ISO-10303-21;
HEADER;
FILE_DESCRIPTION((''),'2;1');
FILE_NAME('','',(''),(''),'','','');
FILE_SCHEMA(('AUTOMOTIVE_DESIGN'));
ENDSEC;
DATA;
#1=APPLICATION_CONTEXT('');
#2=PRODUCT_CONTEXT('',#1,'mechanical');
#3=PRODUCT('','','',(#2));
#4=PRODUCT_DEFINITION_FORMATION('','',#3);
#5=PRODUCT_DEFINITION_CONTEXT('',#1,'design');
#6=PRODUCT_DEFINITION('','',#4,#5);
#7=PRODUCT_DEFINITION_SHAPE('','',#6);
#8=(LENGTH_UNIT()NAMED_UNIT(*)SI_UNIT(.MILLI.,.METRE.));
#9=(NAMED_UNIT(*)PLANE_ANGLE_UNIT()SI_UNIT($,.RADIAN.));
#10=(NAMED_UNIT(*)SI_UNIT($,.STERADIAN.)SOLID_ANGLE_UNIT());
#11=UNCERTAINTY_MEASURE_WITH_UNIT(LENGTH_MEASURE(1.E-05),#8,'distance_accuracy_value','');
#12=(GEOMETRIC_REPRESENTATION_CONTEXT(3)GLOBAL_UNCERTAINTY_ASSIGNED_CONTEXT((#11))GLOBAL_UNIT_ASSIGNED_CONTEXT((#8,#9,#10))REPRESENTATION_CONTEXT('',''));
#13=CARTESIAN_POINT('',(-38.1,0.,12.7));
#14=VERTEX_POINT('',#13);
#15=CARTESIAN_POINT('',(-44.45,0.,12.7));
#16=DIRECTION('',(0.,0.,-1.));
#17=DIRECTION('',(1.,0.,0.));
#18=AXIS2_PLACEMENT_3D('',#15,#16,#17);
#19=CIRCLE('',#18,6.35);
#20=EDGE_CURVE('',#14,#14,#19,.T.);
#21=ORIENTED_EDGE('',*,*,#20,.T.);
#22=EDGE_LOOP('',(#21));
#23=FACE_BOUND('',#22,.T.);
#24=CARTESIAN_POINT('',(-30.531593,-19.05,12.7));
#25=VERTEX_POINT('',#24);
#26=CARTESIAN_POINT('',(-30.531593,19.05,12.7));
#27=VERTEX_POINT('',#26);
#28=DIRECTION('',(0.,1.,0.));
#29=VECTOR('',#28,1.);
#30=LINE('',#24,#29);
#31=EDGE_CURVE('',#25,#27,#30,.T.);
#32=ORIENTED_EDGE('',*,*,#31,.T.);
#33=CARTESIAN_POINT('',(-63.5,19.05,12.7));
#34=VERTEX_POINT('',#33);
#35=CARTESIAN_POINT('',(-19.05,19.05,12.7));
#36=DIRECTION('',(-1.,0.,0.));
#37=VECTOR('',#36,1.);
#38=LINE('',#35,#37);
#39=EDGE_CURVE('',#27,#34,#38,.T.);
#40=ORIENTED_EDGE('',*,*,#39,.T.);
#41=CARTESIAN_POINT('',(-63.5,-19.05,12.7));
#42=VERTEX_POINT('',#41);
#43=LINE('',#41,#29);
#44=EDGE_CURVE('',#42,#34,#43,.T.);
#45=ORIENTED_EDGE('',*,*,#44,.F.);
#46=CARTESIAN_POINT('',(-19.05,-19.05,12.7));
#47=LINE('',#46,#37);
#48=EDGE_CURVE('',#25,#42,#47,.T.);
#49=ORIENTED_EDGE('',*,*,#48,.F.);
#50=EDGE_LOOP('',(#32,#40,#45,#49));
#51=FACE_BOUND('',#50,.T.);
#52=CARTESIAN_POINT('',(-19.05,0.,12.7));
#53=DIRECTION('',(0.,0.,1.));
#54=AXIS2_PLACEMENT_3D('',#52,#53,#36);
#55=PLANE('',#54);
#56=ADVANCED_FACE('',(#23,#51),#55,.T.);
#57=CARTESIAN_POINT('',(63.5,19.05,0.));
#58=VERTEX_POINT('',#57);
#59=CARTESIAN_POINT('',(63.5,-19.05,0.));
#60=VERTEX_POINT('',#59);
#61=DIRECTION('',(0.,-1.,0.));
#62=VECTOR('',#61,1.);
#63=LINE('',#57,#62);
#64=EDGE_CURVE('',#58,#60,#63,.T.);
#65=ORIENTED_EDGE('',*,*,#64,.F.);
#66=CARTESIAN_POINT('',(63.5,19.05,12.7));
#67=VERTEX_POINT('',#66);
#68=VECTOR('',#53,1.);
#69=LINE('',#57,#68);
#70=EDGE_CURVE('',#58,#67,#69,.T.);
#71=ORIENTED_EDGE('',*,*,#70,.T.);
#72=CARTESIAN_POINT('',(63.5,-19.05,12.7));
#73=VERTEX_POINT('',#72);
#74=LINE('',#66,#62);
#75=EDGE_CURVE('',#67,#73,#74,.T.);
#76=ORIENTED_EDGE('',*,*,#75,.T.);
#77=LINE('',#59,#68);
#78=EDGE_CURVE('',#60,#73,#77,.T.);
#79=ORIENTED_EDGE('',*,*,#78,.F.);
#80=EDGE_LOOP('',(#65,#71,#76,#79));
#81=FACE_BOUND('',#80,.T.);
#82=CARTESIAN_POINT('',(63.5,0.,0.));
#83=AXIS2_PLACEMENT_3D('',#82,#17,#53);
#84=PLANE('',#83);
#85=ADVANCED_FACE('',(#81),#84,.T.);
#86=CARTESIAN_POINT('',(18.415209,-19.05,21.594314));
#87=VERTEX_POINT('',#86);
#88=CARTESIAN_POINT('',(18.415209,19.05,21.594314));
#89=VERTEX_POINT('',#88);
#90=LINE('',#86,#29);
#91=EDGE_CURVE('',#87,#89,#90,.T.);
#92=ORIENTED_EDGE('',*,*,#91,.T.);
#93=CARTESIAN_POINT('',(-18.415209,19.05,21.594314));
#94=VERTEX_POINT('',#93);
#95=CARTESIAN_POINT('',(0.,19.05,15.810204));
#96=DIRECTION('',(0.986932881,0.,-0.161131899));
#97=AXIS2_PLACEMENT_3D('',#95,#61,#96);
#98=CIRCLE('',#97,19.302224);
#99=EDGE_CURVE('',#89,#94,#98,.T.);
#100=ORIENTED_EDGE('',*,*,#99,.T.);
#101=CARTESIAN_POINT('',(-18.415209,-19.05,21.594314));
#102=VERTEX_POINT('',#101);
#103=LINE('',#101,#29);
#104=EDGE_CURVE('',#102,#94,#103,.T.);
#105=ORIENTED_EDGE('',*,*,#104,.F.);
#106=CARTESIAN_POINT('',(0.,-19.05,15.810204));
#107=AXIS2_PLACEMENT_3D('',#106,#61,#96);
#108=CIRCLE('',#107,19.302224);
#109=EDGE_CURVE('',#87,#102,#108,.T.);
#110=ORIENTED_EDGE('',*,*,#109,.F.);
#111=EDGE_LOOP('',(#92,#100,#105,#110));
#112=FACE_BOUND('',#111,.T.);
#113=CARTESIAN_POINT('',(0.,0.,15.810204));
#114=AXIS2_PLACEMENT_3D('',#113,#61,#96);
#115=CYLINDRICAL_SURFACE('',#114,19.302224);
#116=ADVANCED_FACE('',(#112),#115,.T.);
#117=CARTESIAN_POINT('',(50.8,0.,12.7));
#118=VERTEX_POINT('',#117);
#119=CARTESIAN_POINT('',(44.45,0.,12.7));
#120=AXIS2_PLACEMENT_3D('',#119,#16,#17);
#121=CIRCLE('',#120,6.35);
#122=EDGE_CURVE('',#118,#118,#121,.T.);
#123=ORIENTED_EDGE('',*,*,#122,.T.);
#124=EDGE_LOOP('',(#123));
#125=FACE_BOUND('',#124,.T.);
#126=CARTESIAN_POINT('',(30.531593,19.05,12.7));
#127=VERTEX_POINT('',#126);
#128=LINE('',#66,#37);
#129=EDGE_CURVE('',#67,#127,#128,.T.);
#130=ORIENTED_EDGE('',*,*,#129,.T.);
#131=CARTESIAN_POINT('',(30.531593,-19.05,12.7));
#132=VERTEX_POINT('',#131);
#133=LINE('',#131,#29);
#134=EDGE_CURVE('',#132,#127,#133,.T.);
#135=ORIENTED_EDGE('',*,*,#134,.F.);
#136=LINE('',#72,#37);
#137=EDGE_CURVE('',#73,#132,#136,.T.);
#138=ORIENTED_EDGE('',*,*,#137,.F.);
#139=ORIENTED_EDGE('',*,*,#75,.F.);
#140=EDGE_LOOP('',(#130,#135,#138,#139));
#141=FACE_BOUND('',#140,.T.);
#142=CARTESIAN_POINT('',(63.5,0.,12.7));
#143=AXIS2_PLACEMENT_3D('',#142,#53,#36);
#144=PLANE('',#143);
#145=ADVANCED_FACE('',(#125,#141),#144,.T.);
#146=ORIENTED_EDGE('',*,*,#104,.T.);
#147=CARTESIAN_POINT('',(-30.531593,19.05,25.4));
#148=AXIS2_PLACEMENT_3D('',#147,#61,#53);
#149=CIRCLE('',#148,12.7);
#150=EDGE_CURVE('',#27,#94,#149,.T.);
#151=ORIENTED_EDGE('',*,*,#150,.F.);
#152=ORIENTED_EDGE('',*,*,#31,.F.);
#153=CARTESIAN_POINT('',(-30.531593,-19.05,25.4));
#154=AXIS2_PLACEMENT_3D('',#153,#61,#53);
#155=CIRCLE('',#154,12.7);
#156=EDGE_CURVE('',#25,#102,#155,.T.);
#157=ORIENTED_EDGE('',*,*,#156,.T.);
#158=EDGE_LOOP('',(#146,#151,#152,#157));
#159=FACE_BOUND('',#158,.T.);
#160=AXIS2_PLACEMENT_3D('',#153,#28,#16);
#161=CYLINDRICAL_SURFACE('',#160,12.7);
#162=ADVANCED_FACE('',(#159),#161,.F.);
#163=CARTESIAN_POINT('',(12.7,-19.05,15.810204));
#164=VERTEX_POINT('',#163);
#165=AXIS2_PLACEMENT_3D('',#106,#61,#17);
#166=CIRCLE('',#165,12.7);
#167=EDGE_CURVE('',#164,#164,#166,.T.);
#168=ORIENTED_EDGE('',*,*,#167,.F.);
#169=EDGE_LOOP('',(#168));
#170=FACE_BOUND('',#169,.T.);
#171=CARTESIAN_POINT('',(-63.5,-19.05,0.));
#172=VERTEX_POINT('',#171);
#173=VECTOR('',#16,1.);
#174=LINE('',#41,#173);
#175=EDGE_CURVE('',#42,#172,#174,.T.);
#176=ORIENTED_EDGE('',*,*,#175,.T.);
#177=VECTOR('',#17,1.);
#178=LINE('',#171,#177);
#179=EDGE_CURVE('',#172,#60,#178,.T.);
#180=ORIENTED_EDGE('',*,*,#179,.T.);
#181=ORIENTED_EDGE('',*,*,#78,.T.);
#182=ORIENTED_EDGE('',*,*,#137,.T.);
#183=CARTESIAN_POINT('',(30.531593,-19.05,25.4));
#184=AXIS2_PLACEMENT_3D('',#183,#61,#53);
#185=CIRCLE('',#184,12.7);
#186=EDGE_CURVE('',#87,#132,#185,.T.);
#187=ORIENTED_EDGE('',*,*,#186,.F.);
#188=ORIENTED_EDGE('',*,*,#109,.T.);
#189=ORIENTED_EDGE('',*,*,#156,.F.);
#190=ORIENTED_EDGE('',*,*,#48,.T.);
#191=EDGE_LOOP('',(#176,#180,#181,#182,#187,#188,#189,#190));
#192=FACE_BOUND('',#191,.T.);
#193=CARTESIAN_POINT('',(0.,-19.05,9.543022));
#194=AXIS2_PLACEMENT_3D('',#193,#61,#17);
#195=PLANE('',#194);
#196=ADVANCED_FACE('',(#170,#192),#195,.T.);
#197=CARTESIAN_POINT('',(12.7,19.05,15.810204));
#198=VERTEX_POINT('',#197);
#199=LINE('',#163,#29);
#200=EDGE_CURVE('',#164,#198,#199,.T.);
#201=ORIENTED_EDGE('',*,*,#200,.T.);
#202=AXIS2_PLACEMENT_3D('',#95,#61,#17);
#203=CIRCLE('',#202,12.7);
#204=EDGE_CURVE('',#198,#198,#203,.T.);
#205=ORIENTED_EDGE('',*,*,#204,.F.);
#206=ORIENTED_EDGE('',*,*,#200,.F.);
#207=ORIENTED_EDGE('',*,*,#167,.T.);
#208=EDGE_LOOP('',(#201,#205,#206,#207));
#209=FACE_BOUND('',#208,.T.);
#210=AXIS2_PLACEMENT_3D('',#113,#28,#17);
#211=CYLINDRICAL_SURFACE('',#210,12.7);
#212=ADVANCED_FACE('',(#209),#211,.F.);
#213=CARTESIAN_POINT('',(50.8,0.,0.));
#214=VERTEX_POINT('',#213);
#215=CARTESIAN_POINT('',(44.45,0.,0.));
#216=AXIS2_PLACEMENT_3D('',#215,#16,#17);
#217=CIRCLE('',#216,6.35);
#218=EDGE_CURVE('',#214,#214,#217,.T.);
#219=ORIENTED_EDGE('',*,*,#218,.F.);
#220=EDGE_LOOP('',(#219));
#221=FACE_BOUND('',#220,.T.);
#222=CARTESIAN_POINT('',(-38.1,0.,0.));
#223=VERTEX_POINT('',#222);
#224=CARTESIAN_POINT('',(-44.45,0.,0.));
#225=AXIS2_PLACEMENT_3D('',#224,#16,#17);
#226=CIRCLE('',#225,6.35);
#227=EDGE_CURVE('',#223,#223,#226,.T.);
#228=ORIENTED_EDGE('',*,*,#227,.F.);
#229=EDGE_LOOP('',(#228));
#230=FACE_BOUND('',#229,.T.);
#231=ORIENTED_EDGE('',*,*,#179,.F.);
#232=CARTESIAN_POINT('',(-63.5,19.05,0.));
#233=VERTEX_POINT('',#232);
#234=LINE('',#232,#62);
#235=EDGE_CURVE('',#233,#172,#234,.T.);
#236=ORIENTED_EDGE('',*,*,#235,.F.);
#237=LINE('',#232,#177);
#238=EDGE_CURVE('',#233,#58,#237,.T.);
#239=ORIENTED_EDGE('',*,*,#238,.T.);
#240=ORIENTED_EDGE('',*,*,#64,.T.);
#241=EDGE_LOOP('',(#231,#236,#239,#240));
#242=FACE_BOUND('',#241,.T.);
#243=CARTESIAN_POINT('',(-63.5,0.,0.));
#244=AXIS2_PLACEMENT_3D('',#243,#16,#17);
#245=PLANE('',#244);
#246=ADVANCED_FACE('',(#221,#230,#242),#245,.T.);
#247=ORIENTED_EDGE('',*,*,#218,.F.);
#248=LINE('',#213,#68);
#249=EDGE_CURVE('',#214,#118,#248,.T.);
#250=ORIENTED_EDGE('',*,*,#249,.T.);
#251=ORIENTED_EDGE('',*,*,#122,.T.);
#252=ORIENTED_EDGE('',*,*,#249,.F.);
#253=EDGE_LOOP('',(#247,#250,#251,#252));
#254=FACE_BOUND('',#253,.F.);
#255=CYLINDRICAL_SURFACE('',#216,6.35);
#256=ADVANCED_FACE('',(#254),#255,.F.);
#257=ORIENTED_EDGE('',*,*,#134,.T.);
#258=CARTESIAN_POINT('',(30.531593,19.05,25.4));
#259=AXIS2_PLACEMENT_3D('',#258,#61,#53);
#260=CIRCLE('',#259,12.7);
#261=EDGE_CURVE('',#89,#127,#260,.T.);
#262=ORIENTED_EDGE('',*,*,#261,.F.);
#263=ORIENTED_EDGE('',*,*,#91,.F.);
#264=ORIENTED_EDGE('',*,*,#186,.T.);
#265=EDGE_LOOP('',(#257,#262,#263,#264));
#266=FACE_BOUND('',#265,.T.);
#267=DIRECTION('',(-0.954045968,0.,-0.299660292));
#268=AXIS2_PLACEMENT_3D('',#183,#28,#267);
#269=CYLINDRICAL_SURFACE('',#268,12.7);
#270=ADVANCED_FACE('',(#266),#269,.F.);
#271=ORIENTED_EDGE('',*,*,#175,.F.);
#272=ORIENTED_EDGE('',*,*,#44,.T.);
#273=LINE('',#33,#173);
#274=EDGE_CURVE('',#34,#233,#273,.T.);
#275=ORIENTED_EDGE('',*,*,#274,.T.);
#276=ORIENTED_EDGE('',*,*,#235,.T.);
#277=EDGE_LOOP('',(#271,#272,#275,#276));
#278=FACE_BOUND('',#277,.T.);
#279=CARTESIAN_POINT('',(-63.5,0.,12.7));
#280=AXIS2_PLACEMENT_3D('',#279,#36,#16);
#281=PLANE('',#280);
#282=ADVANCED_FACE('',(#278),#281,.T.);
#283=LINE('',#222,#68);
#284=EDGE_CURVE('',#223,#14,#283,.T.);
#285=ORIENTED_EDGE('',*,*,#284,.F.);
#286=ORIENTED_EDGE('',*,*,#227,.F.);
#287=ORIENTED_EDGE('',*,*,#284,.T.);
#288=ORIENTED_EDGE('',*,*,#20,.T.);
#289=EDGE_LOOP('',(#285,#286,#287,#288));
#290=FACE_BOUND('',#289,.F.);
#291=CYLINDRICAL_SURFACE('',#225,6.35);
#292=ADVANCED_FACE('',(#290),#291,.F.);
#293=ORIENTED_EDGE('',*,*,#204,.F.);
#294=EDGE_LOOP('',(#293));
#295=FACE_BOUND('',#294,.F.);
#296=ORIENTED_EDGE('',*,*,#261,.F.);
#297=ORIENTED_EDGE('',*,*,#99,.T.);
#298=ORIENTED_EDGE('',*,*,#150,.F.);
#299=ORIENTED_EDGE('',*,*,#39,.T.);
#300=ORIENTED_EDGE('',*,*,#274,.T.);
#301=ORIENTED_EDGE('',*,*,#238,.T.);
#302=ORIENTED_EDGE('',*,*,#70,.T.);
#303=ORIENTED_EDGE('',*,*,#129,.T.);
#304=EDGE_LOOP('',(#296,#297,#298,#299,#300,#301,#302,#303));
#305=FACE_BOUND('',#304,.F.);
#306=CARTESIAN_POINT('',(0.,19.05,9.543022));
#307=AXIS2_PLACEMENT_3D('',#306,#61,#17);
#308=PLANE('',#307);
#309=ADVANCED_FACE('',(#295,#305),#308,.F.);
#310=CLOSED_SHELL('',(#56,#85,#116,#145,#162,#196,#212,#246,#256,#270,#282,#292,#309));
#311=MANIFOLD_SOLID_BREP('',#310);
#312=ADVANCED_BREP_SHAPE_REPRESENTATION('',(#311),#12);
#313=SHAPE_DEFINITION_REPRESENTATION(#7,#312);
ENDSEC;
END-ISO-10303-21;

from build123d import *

# Parameters (mm, degrees)
F0_R     = 12.7
F1_DEPTH = 19.05
F2_R     = 12.7
F3_R     = 6.35
F5_DEPTH = 12.7


# Not quite as in the source:
# - the program builds the solid bodies; features that only make, move or delete a surface that nothing else refers to are left out


with BuildPart() as f1:
    # F0 (on Front) → F1 (new body, symmetric)
    with BuildSketch(Plane.XZ):
        with BuildLine():
            Line((-63.5, 12.7), (-63.5, 0))
            Line((-63.5, 0), (63.5, 0))
            Line((63.5, 0), (63.5, 12.7))
            Line((63.5, 12.7), (19.05, 12.7))
            ThreePointArc((19.05, 12.7), (0, 35.1124285501), (-19.05, 12.7))
            Line((-19.05, 12.7), (-63.5, 12.7))
        make_face()
        with Locations((0, 15.8102040816)):
            Circle(F0_R, mode=Mode.SUBTRACT)
    extrude(amount=F1_DEPTH, both=True)

    # F2
    f2_edges = [f1.edges().sort_by_distance(p)[0] for p in [
        (-19.05, 0, 12.7),
        (19.05, 0, 12.7),
    ]]
    fillet(f2_edges, radius=F2_R)

    # F3 (on face) → F5 (cut, through all)
    with BuildSketch(Plane(origin=(0, 0, 0), x_dir=(1, 0, 0), z_dir=(0, 0, -1))):
        with Locations((-44.45, 0)):
            Circle(F3_R)
        with Locations((44.45, 0)):
            Circle(F3_R)
    extrude(amount=-F5_DEPTH, mode=Mode.SUBTRACT)


solid = f1.part
